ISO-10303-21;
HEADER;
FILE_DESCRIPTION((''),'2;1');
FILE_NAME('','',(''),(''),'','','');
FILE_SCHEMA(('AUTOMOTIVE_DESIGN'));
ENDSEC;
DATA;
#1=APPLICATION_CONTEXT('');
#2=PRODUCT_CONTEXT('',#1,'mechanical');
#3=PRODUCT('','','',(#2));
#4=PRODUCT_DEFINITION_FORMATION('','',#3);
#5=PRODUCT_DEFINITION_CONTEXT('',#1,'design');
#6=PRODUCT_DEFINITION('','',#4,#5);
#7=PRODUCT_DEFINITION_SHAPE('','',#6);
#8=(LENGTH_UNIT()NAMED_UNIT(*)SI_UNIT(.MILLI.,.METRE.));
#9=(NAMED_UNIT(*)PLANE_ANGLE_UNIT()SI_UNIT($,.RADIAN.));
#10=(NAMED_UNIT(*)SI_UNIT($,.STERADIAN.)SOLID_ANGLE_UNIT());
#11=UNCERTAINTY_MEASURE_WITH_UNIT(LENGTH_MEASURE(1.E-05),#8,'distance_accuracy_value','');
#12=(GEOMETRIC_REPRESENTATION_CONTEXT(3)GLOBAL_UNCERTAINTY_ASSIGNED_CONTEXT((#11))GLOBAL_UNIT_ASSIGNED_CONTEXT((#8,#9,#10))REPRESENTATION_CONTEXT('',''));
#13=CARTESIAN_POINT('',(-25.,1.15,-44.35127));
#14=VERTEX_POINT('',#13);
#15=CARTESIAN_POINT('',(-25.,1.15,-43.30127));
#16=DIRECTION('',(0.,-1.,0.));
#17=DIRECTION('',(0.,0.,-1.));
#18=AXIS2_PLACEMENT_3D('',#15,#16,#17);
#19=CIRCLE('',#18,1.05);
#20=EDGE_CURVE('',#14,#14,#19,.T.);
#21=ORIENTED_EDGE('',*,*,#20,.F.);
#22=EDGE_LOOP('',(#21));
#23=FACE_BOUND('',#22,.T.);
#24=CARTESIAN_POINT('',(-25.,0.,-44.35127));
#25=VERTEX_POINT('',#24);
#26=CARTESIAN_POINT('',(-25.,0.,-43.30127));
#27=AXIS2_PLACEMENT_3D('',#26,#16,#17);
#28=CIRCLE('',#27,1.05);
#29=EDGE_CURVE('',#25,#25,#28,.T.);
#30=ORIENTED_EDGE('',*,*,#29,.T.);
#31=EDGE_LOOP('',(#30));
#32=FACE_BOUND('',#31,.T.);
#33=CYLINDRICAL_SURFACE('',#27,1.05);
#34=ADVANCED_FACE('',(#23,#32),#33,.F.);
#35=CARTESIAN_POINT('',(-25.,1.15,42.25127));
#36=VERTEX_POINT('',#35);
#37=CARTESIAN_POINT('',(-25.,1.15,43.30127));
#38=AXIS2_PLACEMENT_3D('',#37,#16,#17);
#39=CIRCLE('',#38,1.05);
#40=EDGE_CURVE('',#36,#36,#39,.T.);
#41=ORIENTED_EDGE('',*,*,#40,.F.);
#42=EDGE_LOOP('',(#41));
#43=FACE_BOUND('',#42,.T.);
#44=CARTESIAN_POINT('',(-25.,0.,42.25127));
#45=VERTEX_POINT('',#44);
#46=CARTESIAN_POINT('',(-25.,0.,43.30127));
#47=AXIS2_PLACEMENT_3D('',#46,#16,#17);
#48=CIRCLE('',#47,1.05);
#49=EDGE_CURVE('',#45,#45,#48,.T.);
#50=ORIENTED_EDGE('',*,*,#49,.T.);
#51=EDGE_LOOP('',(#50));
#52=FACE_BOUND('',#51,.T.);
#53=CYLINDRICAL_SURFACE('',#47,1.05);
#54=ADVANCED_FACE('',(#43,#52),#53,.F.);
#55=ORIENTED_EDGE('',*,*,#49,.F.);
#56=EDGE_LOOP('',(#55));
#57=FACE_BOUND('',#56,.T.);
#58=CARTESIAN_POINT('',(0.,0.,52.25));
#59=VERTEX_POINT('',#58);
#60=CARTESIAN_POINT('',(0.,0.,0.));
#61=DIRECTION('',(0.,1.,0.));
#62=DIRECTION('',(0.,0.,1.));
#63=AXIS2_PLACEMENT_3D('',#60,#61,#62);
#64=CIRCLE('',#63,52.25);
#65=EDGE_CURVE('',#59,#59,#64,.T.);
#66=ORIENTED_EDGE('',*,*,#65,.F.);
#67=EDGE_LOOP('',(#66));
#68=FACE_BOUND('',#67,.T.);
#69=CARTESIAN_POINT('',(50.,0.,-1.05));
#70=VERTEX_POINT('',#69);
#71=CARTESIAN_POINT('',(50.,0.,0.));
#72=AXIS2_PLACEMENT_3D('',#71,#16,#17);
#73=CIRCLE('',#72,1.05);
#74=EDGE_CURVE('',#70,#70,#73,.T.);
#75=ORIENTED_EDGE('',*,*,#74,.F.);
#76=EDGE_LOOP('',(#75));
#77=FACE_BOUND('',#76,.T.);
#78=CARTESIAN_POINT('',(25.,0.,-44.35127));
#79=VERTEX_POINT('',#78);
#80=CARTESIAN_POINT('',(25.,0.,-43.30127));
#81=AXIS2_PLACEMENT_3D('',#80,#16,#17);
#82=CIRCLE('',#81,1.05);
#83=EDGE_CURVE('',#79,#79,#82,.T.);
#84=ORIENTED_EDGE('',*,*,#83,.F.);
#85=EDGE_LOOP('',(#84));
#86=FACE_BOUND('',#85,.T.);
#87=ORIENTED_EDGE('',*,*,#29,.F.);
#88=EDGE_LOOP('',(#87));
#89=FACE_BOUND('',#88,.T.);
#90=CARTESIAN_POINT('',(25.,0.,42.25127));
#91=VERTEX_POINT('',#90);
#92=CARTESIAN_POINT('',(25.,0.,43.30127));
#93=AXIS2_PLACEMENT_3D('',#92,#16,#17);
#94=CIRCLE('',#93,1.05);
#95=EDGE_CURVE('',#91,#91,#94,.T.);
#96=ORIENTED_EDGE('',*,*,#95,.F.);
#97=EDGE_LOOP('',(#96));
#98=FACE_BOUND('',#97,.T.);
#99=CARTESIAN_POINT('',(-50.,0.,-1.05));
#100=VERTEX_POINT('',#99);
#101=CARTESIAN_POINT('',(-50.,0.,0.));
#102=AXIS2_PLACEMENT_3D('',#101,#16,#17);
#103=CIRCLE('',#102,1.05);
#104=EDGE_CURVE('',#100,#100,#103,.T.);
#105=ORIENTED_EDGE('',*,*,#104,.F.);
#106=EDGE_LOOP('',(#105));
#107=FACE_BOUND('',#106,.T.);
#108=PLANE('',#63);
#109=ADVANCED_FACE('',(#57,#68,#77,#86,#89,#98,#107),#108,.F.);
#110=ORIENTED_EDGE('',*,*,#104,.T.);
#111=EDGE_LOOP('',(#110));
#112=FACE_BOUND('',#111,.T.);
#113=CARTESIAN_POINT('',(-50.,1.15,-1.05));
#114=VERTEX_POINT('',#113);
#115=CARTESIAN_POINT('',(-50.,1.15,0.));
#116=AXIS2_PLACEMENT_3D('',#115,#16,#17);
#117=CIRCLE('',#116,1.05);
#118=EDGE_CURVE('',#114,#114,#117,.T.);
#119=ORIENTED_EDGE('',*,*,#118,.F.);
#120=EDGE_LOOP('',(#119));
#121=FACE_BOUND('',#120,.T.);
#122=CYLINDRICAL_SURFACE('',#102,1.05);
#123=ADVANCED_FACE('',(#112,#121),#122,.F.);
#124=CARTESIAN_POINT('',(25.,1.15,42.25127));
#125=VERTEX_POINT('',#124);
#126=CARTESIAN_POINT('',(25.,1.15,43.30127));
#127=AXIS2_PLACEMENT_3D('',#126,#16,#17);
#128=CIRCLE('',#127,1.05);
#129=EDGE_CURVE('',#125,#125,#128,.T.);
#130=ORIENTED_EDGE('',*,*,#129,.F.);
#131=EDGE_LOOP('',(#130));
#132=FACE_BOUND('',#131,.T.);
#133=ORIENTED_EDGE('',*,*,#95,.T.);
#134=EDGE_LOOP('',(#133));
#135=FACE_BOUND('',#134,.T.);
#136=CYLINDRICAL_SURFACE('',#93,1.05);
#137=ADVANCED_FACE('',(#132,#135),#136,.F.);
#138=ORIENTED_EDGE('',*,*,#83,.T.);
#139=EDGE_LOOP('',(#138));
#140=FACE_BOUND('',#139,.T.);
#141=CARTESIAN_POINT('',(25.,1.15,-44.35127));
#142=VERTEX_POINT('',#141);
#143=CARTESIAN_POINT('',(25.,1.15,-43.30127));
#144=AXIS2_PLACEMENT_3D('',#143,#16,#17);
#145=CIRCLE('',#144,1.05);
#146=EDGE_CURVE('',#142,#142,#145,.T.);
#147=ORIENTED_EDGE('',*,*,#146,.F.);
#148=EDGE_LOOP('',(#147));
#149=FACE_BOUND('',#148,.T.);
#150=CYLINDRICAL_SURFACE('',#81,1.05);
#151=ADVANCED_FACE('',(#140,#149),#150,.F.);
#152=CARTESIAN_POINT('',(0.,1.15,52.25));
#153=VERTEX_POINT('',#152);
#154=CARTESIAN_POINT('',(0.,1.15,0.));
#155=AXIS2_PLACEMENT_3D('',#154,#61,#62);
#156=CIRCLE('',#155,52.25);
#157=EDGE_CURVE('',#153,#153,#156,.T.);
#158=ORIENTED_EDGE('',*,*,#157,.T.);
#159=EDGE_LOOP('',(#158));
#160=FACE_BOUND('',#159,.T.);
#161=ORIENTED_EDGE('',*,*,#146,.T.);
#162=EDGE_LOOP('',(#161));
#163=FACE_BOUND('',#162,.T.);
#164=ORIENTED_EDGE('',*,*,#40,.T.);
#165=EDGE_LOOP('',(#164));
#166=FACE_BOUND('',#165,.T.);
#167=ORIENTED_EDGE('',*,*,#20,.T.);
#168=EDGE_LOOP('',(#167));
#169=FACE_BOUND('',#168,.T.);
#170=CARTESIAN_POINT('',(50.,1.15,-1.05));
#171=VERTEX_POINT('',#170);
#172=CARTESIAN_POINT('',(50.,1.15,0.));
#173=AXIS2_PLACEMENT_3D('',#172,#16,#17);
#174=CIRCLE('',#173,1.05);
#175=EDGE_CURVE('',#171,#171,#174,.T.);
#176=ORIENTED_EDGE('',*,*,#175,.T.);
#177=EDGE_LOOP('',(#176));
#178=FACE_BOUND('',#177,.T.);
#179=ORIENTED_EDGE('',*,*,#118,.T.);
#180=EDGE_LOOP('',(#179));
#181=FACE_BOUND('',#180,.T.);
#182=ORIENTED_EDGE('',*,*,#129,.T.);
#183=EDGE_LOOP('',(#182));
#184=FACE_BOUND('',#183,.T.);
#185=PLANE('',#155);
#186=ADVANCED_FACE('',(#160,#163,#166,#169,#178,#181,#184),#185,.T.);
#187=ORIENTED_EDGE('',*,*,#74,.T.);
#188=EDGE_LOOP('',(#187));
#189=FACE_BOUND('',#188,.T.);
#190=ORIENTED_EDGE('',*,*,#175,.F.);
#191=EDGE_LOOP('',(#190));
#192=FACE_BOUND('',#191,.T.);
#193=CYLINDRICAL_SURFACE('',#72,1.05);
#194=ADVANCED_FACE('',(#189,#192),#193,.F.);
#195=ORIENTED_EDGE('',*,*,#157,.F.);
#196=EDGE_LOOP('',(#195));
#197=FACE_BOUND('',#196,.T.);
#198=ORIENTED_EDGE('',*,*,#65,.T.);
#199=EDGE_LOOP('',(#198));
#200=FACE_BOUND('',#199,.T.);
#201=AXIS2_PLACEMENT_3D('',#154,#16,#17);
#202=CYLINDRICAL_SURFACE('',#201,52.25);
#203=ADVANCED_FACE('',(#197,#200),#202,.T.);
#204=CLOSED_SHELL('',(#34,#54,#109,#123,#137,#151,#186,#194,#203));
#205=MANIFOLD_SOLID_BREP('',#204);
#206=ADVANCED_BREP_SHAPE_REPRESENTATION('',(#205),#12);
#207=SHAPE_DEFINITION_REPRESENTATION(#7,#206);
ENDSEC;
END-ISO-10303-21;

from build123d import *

# Parameters (mm, degrees)
SKETCH1_R                  = 52.25
BASE_FLANGE4_DEPTH         = 1.15
F_2_1_2_1_DIAMETER_HOLE2_D = 2.1


# Sheet-metal steps are written as plain solids
with BuildPart() as part:
    # Sketch1 → Base-Flange4 (new body)
    with BuildSketch(Plane(origin=(0, 0, 0), x_dir=(1, 0, 0), z_dir=(0, 1, 0))):
        with Locations(Location((0, 0, 0), (0, 0, 270))):
            Circle(SKETCH1_R)
    extrude(amount=BASE_FLANGE4_DEPTH)

    # Ø2.1 (2.1) Diameter Hole2 (through all)
    with Locations(Plane(origin=(0, 0, 0), x_dir=(-1, 0, 0), z_dir=(0, -1, 0))):
        with Locations((50, 0), (25, -43.301270189), (-25, -43.301270189), (-50, 0), (-25, 43.301270189), (25, 43.301270189)):
            Hole(F_2_1_2_1_DIAMETER_HOLE2_D / 2)


solid = part.part
